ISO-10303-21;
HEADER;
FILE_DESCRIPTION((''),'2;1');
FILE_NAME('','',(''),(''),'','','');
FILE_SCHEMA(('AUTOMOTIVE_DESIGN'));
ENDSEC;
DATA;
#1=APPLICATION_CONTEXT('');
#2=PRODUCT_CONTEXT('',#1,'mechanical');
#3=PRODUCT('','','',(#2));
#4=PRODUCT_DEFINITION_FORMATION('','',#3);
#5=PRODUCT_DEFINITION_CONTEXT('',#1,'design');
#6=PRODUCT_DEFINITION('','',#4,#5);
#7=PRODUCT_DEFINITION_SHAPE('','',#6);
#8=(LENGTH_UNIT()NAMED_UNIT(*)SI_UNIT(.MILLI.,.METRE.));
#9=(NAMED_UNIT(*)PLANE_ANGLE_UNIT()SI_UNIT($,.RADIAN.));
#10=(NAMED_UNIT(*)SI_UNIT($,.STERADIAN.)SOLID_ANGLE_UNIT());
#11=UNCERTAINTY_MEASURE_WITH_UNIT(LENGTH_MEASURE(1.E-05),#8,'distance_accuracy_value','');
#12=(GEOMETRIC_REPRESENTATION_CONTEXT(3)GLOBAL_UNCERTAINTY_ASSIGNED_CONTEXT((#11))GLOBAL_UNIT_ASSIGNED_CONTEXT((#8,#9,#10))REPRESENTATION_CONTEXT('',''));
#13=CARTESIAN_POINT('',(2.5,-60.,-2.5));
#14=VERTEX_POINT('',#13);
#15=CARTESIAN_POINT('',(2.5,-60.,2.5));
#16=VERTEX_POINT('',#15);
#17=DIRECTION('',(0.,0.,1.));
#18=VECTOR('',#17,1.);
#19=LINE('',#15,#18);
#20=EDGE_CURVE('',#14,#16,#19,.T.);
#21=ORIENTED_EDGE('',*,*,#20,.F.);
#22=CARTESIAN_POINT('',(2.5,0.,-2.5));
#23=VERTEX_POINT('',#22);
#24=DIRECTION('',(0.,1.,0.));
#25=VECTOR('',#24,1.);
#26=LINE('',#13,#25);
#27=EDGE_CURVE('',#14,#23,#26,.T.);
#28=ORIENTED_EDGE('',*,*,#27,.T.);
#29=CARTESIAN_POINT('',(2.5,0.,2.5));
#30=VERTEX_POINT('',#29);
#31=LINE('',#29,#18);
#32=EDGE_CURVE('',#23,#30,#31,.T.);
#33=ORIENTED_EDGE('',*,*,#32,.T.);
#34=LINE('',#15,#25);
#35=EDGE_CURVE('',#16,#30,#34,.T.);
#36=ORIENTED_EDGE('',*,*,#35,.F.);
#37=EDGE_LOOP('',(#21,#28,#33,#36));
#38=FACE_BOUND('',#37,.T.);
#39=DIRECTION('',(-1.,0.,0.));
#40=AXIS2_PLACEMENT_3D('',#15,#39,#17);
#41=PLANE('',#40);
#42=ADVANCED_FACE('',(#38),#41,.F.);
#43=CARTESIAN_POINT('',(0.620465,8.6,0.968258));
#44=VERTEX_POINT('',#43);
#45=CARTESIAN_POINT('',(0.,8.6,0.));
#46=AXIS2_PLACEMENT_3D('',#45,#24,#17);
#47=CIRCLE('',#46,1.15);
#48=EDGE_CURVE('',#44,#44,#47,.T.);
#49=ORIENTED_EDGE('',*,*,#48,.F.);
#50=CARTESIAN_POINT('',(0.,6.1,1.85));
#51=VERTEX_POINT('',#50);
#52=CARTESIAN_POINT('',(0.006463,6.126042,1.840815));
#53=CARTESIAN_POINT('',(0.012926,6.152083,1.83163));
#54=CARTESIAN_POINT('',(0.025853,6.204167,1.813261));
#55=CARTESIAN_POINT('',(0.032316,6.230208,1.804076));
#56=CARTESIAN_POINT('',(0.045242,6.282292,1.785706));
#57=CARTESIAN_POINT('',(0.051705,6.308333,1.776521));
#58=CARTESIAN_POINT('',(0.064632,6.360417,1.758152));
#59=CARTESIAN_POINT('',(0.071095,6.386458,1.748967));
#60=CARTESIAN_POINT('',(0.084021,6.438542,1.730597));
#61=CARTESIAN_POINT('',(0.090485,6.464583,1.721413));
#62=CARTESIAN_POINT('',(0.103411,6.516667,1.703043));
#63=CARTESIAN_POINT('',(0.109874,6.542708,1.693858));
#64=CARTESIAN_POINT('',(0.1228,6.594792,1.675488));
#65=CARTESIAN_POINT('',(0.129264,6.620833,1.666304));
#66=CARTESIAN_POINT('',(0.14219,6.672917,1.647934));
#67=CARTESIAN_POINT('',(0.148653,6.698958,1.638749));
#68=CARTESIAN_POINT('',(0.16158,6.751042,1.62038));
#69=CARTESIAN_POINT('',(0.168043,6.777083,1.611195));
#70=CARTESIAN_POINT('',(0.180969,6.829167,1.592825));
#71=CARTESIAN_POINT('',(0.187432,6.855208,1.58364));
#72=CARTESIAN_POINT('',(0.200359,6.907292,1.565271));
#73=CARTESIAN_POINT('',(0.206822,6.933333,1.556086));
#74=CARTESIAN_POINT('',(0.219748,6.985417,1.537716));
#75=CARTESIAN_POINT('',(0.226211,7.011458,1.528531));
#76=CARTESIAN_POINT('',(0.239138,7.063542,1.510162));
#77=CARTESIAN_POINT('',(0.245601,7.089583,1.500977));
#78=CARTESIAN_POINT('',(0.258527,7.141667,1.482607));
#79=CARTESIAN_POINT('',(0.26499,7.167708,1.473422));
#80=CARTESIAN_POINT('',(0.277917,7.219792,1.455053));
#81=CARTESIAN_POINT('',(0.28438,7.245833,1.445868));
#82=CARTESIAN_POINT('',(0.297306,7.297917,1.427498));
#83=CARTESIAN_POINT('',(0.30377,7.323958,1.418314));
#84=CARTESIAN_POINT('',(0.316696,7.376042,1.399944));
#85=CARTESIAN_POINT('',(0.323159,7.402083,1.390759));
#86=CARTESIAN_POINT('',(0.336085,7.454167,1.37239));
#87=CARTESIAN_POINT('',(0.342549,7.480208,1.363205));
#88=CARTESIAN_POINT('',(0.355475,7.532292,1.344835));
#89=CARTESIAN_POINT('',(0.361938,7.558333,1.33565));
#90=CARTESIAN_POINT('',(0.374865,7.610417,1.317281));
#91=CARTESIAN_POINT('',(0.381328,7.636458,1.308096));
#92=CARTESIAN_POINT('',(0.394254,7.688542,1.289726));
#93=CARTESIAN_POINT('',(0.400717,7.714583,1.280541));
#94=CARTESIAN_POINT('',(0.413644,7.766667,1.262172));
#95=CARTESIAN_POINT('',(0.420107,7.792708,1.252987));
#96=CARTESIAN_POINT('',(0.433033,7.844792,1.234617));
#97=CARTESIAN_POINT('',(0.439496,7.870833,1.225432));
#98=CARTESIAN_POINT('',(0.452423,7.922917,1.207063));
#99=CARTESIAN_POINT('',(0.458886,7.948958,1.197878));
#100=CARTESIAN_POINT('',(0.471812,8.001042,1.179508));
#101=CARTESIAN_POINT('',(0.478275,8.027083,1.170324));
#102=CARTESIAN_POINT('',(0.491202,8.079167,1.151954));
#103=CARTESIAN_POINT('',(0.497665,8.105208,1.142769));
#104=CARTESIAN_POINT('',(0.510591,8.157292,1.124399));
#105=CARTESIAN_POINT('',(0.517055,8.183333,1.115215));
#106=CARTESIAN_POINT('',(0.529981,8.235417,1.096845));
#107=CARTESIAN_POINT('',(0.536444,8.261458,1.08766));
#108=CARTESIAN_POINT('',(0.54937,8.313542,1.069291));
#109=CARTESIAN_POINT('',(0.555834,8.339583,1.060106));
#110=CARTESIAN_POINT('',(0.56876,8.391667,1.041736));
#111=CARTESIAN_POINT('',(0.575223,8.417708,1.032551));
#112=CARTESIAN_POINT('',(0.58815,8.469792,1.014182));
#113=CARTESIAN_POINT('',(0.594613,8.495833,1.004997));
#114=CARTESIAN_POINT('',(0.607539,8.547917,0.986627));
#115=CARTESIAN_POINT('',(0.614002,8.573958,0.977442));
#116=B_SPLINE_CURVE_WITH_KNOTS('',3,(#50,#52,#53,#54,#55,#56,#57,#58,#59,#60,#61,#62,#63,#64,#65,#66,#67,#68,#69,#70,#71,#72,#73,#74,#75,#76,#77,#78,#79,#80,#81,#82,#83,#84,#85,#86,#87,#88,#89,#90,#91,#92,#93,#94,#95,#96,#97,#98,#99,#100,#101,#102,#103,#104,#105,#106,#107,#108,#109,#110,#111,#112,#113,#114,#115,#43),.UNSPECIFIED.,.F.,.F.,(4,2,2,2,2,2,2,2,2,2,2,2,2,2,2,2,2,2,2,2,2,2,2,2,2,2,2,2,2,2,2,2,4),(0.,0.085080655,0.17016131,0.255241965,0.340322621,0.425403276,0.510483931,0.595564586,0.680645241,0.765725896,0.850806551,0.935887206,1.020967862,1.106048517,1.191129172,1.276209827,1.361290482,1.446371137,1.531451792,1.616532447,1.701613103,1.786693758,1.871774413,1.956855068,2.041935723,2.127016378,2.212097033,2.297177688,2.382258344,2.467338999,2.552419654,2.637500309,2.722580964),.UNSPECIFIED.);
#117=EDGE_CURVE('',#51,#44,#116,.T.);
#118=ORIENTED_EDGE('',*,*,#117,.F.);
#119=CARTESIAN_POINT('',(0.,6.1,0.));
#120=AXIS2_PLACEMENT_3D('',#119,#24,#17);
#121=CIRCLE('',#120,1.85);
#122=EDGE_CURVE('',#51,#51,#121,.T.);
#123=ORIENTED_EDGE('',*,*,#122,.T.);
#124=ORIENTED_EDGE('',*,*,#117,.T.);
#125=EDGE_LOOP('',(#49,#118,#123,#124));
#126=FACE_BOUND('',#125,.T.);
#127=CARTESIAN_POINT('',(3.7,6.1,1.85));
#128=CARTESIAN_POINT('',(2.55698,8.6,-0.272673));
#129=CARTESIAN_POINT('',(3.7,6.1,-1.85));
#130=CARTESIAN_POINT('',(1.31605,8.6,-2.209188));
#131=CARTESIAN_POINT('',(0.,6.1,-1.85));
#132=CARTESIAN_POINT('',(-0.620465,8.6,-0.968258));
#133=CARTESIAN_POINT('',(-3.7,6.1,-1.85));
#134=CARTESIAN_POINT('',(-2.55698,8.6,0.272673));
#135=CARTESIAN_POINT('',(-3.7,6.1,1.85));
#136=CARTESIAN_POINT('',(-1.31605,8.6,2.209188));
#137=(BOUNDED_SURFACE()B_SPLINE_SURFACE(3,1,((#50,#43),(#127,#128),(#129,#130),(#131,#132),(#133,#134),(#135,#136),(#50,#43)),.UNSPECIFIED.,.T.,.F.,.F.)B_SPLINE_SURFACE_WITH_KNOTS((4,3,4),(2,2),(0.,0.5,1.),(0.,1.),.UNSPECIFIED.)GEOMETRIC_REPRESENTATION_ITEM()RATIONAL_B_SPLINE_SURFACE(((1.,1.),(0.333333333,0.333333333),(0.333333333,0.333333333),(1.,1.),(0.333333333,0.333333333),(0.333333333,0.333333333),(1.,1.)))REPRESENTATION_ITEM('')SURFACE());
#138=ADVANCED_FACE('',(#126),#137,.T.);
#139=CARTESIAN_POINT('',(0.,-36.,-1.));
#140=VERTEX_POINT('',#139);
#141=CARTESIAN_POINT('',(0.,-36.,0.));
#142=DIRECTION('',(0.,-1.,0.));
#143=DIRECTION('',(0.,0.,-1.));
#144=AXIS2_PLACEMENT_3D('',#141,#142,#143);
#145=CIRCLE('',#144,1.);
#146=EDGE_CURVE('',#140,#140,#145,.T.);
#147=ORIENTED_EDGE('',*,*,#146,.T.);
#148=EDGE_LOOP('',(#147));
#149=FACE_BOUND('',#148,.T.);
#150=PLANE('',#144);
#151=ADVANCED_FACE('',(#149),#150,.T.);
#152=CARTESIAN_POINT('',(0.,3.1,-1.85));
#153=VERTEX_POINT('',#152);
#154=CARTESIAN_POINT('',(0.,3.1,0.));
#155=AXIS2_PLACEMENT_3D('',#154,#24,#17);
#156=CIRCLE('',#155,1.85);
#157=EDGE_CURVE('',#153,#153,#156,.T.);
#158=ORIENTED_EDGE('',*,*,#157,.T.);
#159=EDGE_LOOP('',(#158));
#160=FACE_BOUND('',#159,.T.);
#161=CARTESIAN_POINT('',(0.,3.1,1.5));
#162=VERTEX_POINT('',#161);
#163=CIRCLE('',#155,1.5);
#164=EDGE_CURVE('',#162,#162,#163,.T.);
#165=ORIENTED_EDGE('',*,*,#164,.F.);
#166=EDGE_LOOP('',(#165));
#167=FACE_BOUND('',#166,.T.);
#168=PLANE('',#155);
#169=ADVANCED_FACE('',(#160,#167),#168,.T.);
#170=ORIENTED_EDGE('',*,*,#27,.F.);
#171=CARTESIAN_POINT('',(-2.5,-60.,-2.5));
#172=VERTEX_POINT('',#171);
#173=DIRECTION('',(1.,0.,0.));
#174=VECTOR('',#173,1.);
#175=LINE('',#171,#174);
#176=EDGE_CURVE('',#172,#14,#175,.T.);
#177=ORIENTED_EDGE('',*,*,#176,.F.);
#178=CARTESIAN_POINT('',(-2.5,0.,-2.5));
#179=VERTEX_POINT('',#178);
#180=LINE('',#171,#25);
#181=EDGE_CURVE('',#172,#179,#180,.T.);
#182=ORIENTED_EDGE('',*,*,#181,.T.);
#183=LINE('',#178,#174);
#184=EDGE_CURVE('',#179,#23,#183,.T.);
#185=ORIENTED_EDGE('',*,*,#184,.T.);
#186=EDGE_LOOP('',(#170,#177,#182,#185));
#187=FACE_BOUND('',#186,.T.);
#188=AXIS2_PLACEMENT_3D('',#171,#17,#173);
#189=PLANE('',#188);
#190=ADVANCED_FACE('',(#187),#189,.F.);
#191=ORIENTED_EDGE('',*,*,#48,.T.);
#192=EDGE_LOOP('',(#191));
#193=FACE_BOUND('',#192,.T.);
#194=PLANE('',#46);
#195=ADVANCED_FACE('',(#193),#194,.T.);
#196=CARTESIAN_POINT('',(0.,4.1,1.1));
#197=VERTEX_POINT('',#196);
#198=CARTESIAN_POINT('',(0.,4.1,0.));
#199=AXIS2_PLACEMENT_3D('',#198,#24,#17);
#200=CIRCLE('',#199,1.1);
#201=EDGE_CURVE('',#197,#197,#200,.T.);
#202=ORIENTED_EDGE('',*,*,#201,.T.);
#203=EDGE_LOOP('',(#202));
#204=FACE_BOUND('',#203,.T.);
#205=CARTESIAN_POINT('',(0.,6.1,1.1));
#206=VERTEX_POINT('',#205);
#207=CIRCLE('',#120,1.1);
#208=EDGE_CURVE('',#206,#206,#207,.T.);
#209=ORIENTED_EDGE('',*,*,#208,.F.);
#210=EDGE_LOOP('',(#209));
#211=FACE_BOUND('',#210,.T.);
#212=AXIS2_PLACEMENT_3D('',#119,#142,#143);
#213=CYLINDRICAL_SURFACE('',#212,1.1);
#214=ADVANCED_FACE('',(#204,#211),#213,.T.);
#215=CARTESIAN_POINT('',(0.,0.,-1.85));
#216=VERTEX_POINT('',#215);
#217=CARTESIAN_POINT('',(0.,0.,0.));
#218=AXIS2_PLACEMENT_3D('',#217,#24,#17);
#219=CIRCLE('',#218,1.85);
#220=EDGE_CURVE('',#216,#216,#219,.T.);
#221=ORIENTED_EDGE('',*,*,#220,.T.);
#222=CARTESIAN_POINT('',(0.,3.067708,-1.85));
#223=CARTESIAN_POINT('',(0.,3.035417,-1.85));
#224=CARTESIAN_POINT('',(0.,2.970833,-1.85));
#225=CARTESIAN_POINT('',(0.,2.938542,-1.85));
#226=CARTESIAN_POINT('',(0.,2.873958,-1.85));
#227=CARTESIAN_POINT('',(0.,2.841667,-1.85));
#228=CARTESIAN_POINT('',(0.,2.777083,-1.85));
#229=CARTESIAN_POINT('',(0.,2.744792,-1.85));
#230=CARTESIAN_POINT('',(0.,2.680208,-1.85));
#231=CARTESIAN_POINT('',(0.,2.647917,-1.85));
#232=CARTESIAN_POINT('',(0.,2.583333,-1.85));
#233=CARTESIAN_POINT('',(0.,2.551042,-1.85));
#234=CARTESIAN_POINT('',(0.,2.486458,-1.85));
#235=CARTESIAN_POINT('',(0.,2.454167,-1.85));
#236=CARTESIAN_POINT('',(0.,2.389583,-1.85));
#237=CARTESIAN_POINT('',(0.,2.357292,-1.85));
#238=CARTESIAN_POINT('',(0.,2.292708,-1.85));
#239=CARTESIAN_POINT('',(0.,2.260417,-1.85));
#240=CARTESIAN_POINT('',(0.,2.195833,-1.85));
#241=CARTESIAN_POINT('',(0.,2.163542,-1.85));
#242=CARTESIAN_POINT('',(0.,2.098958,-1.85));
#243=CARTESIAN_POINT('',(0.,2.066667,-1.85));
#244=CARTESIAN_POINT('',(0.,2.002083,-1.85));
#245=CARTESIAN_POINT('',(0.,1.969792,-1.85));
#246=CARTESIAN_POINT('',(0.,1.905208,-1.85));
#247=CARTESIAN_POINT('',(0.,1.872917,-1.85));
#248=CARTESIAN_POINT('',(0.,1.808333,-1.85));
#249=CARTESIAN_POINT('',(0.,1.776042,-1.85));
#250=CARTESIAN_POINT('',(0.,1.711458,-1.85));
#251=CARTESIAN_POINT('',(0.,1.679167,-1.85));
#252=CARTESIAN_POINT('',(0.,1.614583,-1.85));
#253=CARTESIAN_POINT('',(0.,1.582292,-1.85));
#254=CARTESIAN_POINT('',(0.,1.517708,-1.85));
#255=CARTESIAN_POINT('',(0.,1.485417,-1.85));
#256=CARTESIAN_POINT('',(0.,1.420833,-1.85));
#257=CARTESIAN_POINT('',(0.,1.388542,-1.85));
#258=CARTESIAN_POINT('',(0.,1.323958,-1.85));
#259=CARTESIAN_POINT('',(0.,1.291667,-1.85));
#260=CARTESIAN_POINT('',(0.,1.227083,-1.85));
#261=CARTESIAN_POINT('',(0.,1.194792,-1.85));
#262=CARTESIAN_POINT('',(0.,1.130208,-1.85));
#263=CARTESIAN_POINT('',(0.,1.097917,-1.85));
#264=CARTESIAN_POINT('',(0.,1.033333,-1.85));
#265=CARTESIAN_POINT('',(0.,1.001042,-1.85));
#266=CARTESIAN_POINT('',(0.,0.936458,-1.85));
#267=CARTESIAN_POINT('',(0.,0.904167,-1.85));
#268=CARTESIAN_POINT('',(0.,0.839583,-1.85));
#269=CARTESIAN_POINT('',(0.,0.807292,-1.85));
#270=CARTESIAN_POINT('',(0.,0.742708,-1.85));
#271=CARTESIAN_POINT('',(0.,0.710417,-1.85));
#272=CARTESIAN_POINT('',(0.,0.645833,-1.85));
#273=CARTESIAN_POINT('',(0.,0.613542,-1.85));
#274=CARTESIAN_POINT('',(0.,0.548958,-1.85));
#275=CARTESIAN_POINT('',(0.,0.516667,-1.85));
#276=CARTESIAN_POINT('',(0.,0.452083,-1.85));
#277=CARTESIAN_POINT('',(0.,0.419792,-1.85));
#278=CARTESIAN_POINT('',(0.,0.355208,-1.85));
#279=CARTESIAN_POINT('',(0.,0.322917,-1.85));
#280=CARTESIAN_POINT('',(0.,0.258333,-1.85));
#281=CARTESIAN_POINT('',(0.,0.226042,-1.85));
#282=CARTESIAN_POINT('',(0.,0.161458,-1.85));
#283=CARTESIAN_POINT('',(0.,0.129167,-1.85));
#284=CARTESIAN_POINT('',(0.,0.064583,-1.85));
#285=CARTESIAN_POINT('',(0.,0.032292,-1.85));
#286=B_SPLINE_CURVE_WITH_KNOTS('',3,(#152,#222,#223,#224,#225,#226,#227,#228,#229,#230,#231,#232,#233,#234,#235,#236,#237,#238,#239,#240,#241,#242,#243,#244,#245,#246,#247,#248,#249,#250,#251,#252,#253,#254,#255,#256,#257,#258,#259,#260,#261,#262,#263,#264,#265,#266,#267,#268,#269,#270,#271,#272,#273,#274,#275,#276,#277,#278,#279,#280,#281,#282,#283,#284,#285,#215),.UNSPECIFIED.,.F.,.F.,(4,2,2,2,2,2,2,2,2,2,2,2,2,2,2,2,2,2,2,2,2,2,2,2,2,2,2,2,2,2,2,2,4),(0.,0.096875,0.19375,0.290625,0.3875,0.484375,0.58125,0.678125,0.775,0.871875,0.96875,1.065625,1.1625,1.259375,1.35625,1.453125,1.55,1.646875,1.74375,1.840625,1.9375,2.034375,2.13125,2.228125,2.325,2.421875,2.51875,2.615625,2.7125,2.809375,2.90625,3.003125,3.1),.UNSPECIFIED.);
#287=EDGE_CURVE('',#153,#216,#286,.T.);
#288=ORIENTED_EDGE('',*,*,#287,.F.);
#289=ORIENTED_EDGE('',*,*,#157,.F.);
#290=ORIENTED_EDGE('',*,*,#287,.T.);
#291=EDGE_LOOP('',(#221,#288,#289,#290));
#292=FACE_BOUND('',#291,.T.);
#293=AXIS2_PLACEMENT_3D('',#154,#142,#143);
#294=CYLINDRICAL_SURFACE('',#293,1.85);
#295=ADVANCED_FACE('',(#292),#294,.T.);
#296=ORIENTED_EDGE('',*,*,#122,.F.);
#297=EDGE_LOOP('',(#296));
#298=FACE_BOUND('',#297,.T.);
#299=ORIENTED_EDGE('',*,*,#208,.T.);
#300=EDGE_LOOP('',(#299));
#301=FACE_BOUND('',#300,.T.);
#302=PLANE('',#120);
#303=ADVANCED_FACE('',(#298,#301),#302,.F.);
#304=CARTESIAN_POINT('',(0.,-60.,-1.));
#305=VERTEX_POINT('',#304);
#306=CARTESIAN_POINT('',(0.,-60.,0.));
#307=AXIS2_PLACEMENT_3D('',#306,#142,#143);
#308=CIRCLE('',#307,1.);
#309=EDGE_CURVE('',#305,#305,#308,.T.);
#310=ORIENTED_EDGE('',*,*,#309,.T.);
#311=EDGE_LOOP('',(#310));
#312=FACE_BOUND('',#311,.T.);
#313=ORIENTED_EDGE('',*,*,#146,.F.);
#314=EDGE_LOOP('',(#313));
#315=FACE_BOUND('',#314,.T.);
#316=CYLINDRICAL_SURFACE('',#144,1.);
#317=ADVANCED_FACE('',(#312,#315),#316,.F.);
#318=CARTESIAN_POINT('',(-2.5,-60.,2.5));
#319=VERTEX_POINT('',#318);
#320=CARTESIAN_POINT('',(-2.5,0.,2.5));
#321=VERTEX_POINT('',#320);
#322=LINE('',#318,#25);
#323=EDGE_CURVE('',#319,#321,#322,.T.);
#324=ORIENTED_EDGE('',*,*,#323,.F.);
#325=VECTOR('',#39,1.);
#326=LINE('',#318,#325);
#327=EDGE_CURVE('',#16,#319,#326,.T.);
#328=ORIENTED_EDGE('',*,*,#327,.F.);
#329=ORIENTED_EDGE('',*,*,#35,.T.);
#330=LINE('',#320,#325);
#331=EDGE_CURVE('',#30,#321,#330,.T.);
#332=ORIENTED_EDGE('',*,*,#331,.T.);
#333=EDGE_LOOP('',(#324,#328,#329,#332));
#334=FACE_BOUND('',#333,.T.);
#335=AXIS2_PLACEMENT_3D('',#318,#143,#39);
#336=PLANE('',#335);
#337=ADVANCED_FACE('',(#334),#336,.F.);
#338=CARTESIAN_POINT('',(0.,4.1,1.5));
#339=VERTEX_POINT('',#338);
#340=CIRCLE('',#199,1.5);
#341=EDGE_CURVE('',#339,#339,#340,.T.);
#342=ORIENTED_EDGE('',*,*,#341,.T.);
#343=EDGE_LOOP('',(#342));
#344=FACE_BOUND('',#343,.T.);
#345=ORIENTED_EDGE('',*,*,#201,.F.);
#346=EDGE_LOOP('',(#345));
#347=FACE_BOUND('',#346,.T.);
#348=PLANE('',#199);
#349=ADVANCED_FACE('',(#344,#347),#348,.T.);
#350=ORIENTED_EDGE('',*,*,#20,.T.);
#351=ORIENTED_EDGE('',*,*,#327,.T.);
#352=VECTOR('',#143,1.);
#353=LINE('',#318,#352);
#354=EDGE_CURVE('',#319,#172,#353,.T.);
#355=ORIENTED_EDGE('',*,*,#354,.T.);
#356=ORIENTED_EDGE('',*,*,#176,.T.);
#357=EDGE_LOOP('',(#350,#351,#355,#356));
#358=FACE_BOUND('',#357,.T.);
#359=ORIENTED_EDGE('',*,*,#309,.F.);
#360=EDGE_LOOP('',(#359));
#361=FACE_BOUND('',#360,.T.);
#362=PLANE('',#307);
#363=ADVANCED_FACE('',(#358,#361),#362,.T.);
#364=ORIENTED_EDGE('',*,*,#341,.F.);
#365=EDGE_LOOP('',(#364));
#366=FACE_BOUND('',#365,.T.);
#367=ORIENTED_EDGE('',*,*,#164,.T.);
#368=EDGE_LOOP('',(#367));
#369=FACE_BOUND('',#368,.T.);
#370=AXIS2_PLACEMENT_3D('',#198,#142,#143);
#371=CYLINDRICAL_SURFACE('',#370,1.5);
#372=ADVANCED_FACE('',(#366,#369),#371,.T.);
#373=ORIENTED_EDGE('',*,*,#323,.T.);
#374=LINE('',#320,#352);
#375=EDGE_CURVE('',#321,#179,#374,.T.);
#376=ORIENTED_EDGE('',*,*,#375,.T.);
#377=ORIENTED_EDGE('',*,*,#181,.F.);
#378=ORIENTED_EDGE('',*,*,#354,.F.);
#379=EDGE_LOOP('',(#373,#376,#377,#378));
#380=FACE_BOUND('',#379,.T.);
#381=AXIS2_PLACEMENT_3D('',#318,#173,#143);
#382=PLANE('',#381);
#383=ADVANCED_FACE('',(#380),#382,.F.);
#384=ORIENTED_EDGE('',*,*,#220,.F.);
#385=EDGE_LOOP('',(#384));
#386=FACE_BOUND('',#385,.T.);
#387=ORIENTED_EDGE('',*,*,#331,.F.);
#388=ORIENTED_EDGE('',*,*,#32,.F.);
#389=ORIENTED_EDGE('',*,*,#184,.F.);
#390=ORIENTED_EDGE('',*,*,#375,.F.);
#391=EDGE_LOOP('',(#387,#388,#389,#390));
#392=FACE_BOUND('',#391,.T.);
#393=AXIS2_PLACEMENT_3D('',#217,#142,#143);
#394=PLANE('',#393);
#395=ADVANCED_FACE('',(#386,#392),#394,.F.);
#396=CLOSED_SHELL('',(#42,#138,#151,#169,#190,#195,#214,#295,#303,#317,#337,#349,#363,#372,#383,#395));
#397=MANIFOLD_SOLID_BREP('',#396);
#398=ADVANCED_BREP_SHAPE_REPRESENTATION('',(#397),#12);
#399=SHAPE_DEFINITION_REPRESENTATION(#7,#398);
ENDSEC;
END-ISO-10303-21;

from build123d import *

# Parameters (mm, degrees)
SKETCH1_R           = 1.85
BOSS_EXTRUDE1_DEPTH = 3.1
SKETCH2_R           = 1.5
BOSS_EXTRUDE2_DEPTH = 1
SKETCH3_R           = 1.1
BOSS_EXTRUDE3_DEPTH = 2
SKETCH6_W           = 5
SKETCH6_H           = 5
BOSS_EXTRUDE4_DEPTH = 60
SKETCH7_R           = 1
CUT_EXTRUDE1_DEPTH  = 24


with BuildPart() as part:
    # Sketch1 → Boss-Extrude1 (new body)
    with BuildSketch(Plane(origin=(0, 0, 0), x_dir=(1, 0, 0), z_dir=(0, 1, 0))):
        with Locations(Location((0, 0, 0), (0, 0, 90))):
            Circle(SKETCH1_R)
    extrude(amount=BOSS_EXTRUDE1_DEPTH)

    # Sketch2 → Boss-Extrude2 (add)
    with BuildSketch(Plane(origin=(0, 3.1, 0), x_dir=(1, 0, 0), z_dir=(0, 1, 0))):
        with Locations(Location((0, 0, 0), (0, 0, 270))):
            Circle(SKETCH2_R)
    extrude(amount=BOSS_EXTRUDE2_DEPTH)

    # Sketch3 → Boss-Extrude3 (add)
    with BuildSketch(Plane(origin=(0, 4.1, 0), x_dir=(1, 0, 0), z_dir=(0, 1, 0))):
        with Locations(Location((0, 0, 0), (0, 0, 270))):
            Circle(SKETCH3_R)
    extrude(amount=BOSS_EXTRUDE3_DEPTH)

    # Loft1: read off the stored shape, not the designer's step
    # Loft1: loft between two sections, ruled curve by curve
    loft1_from = [
        Edge.make_bspline([(0, 6.1, 1.85), (3.7, 6.1, 1.85), (3.7, 6.1, -1.85), (0, 6.1, -1.85), (-3.7, 6.1, -1.85), (-3.7, 6.1, 1.85), (0, 6.1, 1.85)], [0, 0, 0, 0, 0.5, 0.5, 0.5, 1, 1, 1, 1], 3, [1, 0.333333333, 0.333333333, 1, 0.333333333, 0.333333333, 1]),
    ]
    loft1_to = [
        Edge.make_bspline([(0.620465421, 8.6, 0.968257539), (2.556980499, 8.6, -0.272673303), (1.316049657, 8.6, -2.209188381), (-0.620465421, 8.6, -0.968257539), (-2.556980499, 8.6, 0.272673303), (-1.316049657, 8.6, 2.209188381), (0.620465421, 8.6, 0.968257539)], [0, 0, 0, 0, 0.5, 0.5, 0.5, 1, 1, 1, 1], 3, [1, 0.333333333, 0.333333333, 1, 0.333333333, 0.333333333, 1]),
    ]
    loft1 = Solid(Shell([*[Face.make_surface_from_curves(loft1_from[k], loft1_to[k]) for k in range(1)], Face(Wire(loft1_from)), Face(Wire(loft1_to))]))
    add(loft1)

    # Sketch6 → Boss-Extrude4 (add)
    with BuildSketch(Plane.XZ):
        Rectangle(SKETCH6_W, SKETCH6_H)
    extrude(amount=BOSS_EXTRUDE4_DEPTH)

    # Sketch7 → Cut-Extrude1 (cut)
    with BuildSketch(Plane.XZ.offset(60)):
        with Locations(Location((0, 0, 0), (0, 0, 270))):
            Circle(SKETCH7_R)
    extrude(amount=-CUT_EXTRUDE1_DEPTH, mode=Mode.SUBTRACT)


solid = part.part
